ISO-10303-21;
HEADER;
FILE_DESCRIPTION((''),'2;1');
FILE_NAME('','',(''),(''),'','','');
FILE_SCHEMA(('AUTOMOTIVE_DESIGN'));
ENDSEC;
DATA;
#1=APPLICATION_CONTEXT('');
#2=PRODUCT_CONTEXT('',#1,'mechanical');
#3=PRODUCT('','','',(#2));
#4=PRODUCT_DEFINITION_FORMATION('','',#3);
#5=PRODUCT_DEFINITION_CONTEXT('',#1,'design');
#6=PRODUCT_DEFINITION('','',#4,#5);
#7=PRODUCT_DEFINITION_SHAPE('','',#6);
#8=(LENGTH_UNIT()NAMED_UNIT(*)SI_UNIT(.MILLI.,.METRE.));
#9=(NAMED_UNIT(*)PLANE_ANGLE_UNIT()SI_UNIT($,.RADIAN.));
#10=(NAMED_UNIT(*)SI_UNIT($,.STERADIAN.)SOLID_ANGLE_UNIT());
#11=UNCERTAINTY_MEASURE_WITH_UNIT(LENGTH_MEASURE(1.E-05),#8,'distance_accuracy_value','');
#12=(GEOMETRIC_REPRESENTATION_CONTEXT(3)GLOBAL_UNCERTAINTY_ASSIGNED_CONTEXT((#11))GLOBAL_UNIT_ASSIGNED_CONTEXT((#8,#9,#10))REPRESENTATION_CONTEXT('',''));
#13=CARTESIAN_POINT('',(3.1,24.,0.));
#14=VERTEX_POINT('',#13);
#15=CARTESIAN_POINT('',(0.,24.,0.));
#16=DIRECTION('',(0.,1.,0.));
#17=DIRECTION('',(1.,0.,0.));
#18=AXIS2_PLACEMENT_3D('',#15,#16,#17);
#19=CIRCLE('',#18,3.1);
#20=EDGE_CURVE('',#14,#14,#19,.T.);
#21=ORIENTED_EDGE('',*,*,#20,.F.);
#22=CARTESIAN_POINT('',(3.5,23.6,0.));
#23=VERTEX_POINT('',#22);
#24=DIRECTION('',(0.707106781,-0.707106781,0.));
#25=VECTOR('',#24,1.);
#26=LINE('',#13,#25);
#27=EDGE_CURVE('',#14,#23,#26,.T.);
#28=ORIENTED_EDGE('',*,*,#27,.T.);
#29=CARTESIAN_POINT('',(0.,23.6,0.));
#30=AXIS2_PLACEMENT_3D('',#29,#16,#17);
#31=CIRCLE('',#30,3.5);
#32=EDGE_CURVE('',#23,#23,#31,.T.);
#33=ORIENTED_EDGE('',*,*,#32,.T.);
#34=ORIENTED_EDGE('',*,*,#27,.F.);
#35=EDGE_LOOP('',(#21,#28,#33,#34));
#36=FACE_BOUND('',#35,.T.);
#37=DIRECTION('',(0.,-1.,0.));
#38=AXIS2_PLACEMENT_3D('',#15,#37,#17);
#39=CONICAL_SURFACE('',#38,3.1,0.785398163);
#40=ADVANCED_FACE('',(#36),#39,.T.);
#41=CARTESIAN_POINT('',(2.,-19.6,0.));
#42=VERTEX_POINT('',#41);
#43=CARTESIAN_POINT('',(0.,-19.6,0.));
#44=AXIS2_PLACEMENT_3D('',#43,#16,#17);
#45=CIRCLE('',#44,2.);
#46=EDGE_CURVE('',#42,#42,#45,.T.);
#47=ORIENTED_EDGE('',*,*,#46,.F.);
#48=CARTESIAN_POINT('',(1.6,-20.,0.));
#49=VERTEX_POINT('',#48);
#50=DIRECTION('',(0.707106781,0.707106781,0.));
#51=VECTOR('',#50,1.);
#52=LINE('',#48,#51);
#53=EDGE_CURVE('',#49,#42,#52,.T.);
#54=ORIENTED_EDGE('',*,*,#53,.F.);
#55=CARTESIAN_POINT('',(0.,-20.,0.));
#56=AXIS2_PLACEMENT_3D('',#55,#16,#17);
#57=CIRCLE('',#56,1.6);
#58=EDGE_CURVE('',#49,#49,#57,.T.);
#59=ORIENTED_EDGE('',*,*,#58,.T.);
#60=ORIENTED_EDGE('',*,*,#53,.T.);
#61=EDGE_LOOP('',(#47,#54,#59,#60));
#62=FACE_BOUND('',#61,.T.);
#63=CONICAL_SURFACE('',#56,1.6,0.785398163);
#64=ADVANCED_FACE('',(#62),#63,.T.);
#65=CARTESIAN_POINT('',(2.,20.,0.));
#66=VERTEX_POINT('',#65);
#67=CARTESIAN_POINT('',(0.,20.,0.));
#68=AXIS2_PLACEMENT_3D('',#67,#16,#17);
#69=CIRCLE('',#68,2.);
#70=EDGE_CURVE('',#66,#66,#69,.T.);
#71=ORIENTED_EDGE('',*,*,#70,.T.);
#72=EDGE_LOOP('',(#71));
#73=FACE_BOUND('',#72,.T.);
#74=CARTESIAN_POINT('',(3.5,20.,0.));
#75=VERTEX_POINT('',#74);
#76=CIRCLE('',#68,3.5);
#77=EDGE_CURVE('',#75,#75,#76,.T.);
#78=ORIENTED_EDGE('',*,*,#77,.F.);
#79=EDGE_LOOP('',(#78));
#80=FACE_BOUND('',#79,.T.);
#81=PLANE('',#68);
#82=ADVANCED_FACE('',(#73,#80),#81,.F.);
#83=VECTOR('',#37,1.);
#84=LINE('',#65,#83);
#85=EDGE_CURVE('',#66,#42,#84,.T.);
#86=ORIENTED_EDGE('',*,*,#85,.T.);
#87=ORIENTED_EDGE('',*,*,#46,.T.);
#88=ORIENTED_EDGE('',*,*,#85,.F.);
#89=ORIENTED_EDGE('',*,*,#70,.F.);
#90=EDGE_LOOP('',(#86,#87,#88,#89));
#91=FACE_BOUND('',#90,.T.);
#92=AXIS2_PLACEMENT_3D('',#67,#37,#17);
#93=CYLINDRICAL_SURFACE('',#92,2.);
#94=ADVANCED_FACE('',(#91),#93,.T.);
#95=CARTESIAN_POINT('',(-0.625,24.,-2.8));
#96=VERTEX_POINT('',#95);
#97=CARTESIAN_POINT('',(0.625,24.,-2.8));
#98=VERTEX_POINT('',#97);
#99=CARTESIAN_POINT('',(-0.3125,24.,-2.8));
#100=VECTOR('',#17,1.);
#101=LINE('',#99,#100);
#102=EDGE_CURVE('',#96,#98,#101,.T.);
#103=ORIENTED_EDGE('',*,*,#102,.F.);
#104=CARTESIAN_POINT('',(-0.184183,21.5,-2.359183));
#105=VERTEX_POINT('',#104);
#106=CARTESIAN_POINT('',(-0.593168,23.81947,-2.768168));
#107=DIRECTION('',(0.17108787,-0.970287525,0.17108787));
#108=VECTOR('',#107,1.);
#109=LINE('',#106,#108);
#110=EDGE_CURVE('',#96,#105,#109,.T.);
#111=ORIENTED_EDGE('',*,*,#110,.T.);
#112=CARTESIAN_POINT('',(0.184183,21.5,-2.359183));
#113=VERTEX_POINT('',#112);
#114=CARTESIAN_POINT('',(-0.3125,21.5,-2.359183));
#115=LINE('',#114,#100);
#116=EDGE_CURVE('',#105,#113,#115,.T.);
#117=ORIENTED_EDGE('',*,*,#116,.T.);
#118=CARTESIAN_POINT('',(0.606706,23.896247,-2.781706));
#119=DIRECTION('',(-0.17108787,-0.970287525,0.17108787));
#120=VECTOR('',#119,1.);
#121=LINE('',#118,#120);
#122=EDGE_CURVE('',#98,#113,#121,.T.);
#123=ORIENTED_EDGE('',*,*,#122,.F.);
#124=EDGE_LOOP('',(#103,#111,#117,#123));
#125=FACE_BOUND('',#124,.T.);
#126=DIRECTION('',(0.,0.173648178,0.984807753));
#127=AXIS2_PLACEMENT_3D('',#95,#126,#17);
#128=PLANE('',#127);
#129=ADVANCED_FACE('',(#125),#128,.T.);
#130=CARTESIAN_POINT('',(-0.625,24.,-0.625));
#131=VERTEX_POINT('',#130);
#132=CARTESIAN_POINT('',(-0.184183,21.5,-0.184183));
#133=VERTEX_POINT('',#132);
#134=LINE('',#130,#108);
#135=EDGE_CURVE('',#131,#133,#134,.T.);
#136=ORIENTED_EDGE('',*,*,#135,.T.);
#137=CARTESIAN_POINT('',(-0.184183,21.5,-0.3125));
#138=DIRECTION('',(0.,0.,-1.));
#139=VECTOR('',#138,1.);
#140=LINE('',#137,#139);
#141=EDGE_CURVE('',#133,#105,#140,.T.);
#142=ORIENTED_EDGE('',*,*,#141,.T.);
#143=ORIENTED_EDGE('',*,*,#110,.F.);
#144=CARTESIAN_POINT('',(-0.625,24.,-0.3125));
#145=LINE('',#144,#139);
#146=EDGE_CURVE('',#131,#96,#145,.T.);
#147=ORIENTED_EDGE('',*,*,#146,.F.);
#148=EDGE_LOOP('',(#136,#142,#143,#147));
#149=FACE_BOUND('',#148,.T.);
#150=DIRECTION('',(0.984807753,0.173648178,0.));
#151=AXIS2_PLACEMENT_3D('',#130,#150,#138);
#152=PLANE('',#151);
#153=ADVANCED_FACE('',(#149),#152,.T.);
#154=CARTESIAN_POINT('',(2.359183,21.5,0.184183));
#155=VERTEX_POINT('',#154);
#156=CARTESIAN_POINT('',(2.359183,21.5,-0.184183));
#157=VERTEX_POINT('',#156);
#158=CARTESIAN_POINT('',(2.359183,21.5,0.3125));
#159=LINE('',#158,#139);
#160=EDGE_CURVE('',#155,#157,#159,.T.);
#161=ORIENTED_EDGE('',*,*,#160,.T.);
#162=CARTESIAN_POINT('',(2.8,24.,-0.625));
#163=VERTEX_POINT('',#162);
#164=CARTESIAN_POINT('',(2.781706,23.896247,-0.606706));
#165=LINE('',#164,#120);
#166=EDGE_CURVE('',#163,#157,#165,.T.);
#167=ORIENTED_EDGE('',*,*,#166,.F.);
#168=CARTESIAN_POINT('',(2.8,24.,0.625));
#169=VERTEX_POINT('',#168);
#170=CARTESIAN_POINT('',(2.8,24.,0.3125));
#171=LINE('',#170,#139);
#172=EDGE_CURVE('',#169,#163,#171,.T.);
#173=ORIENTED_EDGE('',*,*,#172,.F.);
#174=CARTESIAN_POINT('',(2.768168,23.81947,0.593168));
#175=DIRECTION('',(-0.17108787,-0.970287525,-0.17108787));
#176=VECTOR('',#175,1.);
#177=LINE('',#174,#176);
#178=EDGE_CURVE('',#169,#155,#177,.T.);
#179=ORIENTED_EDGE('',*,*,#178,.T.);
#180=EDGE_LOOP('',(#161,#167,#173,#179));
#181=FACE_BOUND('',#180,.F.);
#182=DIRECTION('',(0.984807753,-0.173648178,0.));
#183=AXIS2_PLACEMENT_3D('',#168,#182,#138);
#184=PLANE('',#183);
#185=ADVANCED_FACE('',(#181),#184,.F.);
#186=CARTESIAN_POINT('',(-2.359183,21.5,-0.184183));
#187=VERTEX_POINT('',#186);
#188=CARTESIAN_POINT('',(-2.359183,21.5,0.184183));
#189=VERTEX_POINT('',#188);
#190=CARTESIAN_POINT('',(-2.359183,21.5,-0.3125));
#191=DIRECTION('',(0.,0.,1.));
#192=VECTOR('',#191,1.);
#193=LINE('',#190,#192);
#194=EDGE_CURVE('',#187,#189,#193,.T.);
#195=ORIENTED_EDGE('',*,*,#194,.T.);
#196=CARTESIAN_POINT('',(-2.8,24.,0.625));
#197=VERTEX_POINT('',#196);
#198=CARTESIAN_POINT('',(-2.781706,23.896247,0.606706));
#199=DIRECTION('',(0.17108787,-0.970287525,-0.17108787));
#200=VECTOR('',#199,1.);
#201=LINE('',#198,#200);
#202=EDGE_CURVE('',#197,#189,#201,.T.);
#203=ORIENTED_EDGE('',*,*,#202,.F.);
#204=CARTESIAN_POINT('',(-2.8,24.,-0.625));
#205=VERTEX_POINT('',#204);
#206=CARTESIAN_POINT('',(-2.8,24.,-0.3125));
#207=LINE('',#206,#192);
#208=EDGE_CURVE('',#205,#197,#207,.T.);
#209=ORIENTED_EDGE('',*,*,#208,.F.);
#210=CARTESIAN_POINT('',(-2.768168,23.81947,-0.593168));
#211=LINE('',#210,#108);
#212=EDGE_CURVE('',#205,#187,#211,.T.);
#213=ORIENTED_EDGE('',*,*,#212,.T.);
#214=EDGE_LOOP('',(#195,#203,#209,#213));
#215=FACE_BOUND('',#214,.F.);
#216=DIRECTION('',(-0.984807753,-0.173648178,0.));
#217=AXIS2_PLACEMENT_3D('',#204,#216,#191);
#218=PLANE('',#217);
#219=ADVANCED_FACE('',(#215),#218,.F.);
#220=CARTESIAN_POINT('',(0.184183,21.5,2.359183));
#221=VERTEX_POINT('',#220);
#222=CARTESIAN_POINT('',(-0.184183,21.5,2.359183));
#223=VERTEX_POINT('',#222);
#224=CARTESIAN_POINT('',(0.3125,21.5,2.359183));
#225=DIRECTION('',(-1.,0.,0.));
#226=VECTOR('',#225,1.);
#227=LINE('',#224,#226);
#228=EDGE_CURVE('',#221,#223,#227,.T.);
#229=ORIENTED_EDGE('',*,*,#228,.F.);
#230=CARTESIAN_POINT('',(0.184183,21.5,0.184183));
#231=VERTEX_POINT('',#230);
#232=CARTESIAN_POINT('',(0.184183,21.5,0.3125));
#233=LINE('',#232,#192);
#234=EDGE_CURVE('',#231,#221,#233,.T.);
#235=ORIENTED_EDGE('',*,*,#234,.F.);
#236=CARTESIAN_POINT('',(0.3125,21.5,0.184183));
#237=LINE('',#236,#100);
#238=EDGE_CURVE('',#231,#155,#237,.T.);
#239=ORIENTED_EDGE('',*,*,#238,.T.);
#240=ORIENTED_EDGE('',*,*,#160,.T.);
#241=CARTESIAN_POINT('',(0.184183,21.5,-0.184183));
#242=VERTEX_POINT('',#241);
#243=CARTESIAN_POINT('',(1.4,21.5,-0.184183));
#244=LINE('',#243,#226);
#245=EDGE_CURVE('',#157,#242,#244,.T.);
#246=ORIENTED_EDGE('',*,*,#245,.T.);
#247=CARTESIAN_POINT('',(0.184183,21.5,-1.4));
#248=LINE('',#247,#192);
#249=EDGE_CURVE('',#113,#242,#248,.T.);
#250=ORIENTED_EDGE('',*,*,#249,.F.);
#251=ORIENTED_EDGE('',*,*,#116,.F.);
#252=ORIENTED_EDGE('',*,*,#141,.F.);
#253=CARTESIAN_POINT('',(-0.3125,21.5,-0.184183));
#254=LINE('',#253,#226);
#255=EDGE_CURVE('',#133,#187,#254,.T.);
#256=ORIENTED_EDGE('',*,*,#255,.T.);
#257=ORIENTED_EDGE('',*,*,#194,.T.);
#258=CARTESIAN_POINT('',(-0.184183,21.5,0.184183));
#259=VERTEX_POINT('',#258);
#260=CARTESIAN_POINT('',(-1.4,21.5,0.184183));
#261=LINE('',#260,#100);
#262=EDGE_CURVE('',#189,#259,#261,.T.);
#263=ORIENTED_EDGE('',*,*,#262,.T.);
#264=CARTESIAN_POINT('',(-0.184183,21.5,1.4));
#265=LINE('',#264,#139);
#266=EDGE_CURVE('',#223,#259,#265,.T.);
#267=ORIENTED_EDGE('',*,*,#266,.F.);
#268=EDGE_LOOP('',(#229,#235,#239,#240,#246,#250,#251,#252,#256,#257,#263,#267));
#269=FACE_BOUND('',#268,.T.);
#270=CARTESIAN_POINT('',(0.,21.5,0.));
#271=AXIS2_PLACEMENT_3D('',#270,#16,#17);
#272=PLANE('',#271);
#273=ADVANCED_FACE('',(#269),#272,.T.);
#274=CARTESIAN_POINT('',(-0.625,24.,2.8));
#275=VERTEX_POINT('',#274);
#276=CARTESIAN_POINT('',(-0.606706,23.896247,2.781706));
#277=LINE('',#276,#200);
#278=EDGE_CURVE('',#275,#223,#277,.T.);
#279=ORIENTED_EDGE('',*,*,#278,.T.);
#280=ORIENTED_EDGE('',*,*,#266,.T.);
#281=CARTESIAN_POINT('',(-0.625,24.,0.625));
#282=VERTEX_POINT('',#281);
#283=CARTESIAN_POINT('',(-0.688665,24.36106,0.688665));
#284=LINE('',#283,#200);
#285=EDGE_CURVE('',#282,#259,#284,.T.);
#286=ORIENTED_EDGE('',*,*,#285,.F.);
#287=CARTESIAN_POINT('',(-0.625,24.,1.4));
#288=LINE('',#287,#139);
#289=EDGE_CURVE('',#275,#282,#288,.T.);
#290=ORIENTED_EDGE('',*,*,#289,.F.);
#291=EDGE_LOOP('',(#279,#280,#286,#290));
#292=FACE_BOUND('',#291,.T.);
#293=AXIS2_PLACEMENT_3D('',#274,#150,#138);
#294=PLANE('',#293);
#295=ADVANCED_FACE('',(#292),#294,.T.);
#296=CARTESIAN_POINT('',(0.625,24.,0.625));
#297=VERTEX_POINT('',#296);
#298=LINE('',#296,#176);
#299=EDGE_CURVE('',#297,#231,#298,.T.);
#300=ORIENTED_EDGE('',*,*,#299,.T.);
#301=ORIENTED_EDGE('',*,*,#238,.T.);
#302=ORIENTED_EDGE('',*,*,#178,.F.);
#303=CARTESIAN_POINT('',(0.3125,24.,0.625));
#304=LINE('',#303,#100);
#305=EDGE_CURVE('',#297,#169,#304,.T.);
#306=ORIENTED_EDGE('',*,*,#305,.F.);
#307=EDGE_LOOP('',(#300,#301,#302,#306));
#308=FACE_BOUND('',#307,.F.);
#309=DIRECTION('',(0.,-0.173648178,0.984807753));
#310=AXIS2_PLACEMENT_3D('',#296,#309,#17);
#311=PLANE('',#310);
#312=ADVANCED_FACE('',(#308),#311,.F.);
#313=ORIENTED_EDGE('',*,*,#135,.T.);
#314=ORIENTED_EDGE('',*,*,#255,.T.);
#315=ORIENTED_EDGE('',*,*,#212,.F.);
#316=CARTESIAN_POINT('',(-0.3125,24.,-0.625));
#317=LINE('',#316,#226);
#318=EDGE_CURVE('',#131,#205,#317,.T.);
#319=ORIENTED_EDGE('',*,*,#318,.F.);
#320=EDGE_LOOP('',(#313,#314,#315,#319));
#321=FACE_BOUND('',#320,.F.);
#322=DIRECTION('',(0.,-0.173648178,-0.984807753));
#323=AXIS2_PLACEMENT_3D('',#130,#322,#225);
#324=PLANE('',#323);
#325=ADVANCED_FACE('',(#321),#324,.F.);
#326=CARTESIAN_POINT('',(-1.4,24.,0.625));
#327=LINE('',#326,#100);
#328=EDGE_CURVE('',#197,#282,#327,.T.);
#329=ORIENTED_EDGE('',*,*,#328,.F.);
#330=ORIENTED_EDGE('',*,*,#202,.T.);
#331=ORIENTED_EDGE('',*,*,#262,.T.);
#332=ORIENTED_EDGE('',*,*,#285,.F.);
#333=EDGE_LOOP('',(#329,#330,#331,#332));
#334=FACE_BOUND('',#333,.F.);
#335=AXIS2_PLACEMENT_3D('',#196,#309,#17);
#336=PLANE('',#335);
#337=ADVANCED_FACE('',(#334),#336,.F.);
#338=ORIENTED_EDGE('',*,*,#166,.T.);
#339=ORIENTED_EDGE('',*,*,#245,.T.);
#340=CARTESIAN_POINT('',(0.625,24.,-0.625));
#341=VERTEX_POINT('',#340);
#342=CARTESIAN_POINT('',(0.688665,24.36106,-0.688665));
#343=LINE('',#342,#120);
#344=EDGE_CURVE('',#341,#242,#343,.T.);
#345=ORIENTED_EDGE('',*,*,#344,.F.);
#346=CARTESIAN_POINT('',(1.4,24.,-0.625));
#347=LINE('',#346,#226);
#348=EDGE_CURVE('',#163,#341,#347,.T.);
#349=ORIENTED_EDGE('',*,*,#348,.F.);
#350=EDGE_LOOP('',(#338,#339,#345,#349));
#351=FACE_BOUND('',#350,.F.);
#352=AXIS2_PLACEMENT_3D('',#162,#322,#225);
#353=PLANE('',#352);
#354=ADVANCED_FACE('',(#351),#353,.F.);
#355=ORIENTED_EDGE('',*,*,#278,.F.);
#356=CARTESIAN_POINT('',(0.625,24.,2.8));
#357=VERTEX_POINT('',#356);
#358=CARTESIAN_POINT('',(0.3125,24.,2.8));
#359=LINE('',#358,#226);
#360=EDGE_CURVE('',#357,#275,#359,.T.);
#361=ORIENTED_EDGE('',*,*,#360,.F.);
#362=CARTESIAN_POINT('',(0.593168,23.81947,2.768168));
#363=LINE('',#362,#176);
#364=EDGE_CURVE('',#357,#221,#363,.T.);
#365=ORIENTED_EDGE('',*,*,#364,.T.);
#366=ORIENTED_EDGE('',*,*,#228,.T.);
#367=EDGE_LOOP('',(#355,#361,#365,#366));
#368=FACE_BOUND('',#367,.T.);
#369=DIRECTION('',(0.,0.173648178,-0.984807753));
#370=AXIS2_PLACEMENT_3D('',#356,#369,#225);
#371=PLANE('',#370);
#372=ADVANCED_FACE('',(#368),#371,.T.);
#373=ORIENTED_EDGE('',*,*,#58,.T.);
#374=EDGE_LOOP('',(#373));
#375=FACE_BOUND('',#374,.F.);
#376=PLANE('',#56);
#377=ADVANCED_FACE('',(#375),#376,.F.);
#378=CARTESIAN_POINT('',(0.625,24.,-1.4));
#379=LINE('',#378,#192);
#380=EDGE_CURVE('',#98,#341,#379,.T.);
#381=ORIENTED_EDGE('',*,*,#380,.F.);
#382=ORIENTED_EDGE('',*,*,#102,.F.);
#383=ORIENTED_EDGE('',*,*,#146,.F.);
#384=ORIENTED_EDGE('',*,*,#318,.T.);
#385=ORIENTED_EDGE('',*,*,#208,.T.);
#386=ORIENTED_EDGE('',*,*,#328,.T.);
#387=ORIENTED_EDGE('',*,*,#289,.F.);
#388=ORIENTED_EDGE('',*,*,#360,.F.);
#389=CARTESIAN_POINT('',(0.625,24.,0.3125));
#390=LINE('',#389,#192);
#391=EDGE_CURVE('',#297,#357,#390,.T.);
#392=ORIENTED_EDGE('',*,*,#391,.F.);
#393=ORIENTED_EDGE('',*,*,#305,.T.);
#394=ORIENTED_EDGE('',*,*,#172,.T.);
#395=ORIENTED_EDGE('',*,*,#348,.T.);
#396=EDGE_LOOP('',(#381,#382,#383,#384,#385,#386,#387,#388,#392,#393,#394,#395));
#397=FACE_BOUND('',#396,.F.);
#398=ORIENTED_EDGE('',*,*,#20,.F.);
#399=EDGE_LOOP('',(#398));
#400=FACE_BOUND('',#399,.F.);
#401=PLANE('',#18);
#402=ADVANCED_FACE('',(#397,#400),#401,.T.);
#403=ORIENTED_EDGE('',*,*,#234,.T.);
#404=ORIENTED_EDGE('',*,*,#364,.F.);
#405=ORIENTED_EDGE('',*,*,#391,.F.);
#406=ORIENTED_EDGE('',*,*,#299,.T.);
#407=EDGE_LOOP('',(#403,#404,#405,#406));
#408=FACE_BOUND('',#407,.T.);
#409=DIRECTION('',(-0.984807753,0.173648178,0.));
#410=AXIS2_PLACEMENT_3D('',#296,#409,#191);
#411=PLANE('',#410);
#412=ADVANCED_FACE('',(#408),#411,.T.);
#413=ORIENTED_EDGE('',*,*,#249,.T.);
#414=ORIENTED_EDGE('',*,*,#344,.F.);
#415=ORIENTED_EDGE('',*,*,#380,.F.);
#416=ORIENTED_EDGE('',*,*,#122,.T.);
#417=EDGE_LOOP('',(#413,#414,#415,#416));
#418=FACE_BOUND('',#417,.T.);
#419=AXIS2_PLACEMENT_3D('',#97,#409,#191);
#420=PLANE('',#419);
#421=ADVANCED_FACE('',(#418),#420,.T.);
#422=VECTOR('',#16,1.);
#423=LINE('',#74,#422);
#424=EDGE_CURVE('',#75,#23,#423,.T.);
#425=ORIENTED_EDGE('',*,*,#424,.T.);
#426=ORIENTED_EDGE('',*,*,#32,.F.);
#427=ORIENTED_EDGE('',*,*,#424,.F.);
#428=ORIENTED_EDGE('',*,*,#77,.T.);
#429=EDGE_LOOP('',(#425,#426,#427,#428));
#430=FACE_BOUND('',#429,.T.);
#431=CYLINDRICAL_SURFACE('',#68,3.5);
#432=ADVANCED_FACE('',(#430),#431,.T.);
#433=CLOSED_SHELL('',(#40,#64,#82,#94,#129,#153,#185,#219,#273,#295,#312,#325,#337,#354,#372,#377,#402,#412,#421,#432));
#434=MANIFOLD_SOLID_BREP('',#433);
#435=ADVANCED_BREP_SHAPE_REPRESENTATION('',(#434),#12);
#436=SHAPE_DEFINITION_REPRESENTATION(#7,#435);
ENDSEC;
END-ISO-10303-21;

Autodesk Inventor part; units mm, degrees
ref_plane "YZ Plane" through (0, 0, 0) normal (1, 0, 0) x (0, 1, 0)
ref_plane "XZ Plane" through (0, 0, 0) normal (0, 1, 0) x (-1, 0, 0)
ref_plane "XY Plane" through (0, 0, 0) normal (0, 0, 1) x (1, 0, 0)
sketch "Sketch1" plane through (0, 0, 0) normal (0, 0, 1) x (1, 0, 0)
  line L0 (-2, -20) -> (-2, 20)
  line L1 (-2, 20) -> (2, 20)
  line L2 (2, 20) -> (2, -20)
  line L3 (2, -20) -> (-2, -20)
  line L4 (-2, -20) -> (2, 20) construction
  line L5 (-2, 20) -> (2, -20) construction
  line L6 (0, -20) -> (0, -19.6)
  line L7 (0, -20) -> (1.6, -20)
  line L8 (0, -20) -> (-1.6, -20)
  line L9 (-1.6, -20) -> (-2, -19.6)
  line L10 (0, 22.999163) -> (0, 17.000837)
  line L11 (0, 20) -> (0, 24)
  line L12 (0, 24) -> (3.5, 24)
  line L13 (0, 20) -> (3.5, 20)
  line L14 (3.5, 20) -> (3.5, 24)
  line L15 (0, 24) -> (-3.5, 24)
  line L16 (-3.5, 24) -> (-3.5, 20)
  line L17 (-3.5, 20) -> (0, 20)
  line L18 (0, 24) -> (3.1, 24)
  line L19 (0, 24) -> (0, 23.6)
  line L20 (3.1, 24) -> (3.5, 23.6)
  line L21 (0, 24) -> (-3.1, 24)
  line L22 (1.6, -20) -> (2, -19.6)
  line L23 (0, 20) -> (0, -20.824074)
  line L24 (0, -20) -> (0, 20)
  point P0 (0, 0)
  dimension "d0" = 40
  dimension "d1" = 4
  dimension "d2" = 0.4
  dimension "d3" = 1.6
  dimension "d4" = 1.6
  dimension "d5" = 4
  dimension "d6" = 3.5
  dimension "d7" = 3.5
  dimension "d8" = 3.1
  dimension "d9" = 0.4
  dimension "d10" = 3.1
revolve "Revolution1" add sketch "Sketch1" angle 360 about axis through (0, -20, 0) along (0, 1, 0) contours L6 L23 L10 L1 L2 L22 L3 | L10 L11 L12 L20 L14 L13 L1
sketch "Sketch2" plane through (0, 24, 0) normal (0, 1, 0) x (1, 0, 0)
  line L0 (-2.8, -0.625) -> (2.8, -0.625)
  line L1 (2.8, -0.625) -> (2.8, 0.625)
  line L2 (2.8, 0.625) -> (-2.8, 0.625)
  line L3 (-2.8, 0.625) -> (-2.8, -0.625)
  line L4 (-2.8, -0.625) -> (2.8, 0.625) construction
  line L5 (2.8, -0.625) -> (-2.8, 0.625) construction
  line L6 (-0.625, -2.8) -> (-0.625, 2.8)
  line L7 (-0.625, 2.8) -> (0.625, 2.8)
  line L8 (0.625, 2.8) -> (0.625, -2.8)
  line L9 (0.625, -2.8) -> (-0.625, -2.8)
  circle A0 centre (0, 0) radius 2 projected
  line L10 (-0.625, -2.8) -> (0.625, 2.8) construction
  line L11 (-0.625, 2.8) -> (0.625, -2.8) construction
  dimension "d12" = 5.6
  dimension "d13" = 1.25
  dimension "d14" = 5.6
  dimension "d15" = 1.25
sketch "Sketch2 outline for Extrusion1" plane through (0, 24, 0) normal (0, 1, 0) x (1, 0, 0)
  line L0 (-0.625, -2.8) -> (-0.625, -0.625)
  line L1 (0.625, -2.8) -> (-0.625, -2.8)
  line L2 (0.625, -0.625) -> (0.625, -2.8)
  line L3 (0.625, -0.625) -> (2.8, -0.625)
  line L4 (2.8, -0.625) -> (2.8, 0.625)
  line L5 (2.8, 0.625) -> (0.625, 0.625)
  line L6 (0.625, 2.8) -> (0.625, 0.625)
  line L7 (-0.625, 2.8) -> (0.625, 2.8)
  line L8 (-0.625, 0.625) -> (-0.625, 2.8)
  line L9 (-0.625, 0.625) -> (-2.8, 0.625)
  line L10 (-2.8, 0.625) -> (-2.8, -0.625)
  line L11 (-2.8, -0.625) -> (-0.625, -0.625)
extrude "Extrusion1" cut sketch "Sketch2 outline for Extrusion1" against normal blind 2.5 draft -10
properties part number "Screws" material "Steel"
